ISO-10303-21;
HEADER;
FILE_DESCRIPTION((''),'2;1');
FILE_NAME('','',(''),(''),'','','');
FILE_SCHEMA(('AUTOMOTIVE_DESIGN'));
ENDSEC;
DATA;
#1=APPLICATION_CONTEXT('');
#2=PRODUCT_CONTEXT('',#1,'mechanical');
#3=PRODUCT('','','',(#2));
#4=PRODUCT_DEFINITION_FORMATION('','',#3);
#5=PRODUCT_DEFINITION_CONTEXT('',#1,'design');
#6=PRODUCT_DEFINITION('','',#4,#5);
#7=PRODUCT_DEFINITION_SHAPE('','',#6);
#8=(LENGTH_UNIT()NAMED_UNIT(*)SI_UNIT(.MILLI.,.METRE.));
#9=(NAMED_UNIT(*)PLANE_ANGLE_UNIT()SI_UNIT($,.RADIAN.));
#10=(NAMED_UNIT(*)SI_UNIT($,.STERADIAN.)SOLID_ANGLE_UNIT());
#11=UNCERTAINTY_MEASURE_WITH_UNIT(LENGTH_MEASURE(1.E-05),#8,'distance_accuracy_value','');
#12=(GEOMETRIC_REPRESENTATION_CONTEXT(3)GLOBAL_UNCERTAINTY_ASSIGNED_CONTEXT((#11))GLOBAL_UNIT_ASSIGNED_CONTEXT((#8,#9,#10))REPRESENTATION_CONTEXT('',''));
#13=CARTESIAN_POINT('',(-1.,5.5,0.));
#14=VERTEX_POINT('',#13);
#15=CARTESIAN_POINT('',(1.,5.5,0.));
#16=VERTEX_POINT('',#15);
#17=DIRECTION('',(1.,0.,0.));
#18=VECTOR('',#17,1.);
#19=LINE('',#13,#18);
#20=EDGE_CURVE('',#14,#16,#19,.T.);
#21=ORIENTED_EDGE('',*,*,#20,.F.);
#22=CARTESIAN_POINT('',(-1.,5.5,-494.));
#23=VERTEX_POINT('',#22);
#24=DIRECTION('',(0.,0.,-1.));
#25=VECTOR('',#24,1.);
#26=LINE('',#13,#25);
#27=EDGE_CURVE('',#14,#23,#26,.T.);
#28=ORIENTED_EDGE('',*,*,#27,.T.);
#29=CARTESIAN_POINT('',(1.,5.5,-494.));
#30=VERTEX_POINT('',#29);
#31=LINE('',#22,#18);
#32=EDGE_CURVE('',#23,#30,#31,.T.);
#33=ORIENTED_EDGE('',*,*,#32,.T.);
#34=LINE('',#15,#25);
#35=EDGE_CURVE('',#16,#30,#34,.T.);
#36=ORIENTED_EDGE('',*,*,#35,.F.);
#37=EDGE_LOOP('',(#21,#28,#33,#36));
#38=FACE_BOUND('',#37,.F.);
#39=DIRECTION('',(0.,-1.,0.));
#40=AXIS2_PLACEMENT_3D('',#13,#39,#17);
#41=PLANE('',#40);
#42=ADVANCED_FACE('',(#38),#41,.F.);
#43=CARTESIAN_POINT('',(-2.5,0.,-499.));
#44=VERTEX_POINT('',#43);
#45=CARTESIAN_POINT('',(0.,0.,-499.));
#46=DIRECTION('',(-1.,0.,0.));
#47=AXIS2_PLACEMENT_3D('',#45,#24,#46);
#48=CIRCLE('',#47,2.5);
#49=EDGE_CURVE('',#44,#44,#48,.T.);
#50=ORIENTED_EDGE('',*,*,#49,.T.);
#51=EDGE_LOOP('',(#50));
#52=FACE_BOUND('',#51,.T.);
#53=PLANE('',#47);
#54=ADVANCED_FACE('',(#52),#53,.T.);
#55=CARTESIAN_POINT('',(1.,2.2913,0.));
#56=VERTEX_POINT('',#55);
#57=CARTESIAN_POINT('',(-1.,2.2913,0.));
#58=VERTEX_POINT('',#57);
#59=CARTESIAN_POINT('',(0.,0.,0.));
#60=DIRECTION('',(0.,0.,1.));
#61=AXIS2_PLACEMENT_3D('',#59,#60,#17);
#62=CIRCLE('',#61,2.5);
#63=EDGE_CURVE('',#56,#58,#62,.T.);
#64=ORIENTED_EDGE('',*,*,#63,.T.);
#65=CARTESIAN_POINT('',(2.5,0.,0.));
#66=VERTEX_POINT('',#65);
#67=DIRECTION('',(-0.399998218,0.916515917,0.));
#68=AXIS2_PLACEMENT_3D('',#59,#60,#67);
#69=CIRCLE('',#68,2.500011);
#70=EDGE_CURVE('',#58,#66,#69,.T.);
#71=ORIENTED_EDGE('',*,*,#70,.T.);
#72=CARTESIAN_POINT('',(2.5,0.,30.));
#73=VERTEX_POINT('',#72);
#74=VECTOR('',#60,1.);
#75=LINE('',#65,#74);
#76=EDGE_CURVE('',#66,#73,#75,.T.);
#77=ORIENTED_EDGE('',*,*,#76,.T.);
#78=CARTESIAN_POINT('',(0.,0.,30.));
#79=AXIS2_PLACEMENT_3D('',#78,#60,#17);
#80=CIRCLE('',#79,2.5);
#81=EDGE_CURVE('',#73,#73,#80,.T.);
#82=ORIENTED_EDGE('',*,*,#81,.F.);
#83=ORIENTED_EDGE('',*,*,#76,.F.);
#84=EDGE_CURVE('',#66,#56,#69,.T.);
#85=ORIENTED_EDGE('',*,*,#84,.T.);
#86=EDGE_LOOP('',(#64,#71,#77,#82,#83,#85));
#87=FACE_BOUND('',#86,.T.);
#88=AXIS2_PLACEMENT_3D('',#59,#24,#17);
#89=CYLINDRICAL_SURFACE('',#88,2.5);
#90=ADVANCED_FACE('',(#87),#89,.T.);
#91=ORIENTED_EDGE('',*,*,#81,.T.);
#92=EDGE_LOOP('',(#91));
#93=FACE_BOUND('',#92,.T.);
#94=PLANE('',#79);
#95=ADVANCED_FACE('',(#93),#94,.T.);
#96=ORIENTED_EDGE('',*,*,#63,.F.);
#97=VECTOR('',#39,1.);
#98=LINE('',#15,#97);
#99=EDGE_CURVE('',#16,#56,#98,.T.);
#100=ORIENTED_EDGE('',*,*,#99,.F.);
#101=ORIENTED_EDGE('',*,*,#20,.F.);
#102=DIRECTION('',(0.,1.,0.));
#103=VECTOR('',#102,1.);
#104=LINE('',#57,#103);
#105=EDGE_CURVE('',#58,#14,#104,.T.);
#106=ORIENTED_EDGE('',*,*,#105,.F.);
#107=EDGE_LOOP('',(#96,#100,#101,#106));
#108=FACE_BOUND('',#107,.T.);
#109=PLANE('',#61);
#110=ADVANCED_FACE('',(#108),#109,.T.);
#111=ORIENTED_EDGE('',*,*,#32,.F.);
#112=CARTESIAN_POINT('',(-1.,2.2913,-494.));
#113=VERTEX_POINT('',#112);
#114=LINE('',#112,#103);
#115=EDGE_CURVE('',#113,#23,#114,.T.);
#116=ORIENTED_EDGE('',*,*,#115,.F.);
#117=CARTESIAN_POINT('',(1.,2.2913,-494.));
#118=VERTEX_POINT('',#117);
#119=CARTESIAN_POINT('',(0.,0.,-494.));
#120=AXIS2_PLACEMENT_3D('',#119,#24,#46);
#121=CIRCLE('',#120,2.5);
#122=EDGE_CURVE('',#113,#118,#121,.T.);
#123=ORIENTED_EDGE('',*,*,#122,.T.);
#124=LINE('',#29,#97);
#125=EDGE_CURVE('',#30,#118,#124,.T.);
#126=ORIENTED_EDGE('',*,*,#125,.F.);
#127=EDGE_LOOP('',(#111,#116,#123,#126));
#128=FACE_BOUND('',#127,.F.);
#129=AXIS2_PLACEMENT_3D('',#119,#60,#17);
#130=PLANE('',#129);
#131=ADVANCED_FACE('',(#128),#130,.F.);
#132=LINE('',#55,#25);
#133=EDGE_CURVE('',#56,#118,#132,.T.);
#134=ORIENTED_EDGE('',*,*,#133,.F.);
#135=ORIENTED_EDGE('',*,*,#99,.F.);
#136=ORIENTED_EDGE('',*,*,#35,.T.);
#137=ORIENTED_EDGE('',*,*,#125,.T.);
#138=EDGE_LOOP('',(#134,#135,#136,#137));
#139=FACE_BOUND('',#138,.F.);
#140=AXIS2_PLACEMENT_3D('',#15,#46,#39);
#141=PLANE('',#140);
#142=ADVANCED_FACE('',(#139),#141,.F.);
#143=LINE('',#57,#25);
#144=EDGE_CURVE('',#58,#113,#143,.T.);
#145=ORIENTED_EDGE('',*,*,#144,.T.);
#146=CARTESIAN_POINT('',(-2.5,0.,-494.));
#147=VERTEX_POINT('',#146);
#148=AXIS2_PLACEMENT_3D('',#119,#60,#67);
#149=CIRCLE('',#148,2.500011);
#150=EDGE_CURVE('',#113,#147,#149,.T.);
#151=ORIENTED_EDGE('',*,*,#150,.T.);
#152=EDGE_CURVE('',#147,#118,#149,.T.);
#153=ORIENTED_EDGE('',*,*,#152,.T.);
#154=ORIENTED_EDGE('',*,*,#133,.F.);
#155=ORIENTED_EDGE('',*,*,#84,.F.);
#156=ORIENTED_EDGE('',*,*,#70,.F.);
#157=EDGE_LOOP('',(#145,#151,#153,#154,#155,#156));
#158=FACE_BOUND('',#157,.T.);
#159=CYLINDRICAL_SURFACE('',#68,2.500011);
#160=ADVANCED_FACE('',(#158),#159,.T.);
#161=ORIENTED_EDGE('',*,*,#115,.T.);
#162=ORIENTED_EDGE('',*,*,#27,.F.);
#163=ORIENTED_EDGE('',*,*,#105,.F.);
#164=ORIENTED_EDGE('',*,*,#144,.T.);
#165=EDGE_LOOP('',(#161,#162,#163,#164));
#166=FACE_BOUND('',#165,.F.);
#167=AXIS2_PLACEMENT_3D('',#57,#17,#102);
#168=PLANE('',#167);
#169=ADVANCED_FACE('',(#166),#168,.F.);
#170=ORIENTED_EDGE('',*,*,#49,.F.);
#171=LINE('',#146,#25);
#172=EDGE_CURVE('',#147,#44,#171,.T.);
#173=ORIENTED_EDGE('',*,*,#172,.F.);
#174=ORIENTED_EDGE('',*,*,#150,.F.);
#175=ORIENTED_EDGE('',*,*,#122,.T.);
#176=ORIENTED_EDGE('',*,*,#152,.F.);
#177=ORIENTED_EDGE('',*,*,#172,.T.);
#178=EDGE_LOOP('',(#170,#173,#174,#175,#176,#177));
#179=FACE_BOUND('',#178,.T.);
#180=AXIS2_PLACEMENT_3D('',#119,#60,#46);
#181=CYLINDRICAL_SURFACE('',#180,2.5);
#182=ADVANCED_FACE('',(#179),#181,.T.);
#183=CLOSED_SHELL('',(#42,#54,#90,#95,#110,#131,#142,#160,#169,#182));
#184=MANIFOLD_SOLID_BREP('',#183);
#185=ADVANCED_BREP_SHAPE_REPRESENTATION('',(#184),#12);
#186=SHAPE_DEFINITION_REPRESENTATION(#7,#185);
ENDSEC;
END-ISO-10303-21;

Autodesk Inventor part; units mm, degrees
ref_plane "YZ Plane" through (0, 0, 0) normal (1, 0, 0) x (0, 1, 0)
ref_plane "XZ Plane" through (0, 0, 0) normal (0, 1, 0) x (-1, 0, 0)
ref_plane "XY Plane" through (0, 0, 0) normal (0, 0, 1) x (1, 0, 0)
sketch "Sketch1" plane through (0, 0, 0) normal (0, 0, 1) x (1, 0, 0)
  arc A0 (-1, 2.2913) -> (1, 2.2913) centre (0, 0) ccw
  line L0 (-1, 5.5) -> (1, 5.5)
  line L1 (1, 5.5) -> (1, 2.2913)
  line L2 (-1, 2.2913) -> (-1, 5.5)
  line L3 (-1, 5.5) -> (1, 2.5) construction
  line L4 (1, 5.5) -> (-1, 2.5) construction
  point P0 (0, 4)
  dimension "d0" = 5
extrude "Extrusion1" add sketch "Sketch1" against normal blind 494
sketch "Sketch2" plane through (0, 0, 0) normal (0, 0, 1) x (1, 0, 0)
  circle A0 centre (0, 0) radius 2.5
  dimension "d3" = 5
extrude "Extrusion2" add sketch "Sketch2" along normal blind 30
sketch "Sketch3" plane through (0, 0, -494) normal (0, 0, -1) x (-1, 0, 0)
  circle A0 centre (0, 0) radius 2.5
  dimension "d6" = 5
extrude "Extrusion3" add sketch "Sketch3" along normal blind 5
properties part number "shaft"
